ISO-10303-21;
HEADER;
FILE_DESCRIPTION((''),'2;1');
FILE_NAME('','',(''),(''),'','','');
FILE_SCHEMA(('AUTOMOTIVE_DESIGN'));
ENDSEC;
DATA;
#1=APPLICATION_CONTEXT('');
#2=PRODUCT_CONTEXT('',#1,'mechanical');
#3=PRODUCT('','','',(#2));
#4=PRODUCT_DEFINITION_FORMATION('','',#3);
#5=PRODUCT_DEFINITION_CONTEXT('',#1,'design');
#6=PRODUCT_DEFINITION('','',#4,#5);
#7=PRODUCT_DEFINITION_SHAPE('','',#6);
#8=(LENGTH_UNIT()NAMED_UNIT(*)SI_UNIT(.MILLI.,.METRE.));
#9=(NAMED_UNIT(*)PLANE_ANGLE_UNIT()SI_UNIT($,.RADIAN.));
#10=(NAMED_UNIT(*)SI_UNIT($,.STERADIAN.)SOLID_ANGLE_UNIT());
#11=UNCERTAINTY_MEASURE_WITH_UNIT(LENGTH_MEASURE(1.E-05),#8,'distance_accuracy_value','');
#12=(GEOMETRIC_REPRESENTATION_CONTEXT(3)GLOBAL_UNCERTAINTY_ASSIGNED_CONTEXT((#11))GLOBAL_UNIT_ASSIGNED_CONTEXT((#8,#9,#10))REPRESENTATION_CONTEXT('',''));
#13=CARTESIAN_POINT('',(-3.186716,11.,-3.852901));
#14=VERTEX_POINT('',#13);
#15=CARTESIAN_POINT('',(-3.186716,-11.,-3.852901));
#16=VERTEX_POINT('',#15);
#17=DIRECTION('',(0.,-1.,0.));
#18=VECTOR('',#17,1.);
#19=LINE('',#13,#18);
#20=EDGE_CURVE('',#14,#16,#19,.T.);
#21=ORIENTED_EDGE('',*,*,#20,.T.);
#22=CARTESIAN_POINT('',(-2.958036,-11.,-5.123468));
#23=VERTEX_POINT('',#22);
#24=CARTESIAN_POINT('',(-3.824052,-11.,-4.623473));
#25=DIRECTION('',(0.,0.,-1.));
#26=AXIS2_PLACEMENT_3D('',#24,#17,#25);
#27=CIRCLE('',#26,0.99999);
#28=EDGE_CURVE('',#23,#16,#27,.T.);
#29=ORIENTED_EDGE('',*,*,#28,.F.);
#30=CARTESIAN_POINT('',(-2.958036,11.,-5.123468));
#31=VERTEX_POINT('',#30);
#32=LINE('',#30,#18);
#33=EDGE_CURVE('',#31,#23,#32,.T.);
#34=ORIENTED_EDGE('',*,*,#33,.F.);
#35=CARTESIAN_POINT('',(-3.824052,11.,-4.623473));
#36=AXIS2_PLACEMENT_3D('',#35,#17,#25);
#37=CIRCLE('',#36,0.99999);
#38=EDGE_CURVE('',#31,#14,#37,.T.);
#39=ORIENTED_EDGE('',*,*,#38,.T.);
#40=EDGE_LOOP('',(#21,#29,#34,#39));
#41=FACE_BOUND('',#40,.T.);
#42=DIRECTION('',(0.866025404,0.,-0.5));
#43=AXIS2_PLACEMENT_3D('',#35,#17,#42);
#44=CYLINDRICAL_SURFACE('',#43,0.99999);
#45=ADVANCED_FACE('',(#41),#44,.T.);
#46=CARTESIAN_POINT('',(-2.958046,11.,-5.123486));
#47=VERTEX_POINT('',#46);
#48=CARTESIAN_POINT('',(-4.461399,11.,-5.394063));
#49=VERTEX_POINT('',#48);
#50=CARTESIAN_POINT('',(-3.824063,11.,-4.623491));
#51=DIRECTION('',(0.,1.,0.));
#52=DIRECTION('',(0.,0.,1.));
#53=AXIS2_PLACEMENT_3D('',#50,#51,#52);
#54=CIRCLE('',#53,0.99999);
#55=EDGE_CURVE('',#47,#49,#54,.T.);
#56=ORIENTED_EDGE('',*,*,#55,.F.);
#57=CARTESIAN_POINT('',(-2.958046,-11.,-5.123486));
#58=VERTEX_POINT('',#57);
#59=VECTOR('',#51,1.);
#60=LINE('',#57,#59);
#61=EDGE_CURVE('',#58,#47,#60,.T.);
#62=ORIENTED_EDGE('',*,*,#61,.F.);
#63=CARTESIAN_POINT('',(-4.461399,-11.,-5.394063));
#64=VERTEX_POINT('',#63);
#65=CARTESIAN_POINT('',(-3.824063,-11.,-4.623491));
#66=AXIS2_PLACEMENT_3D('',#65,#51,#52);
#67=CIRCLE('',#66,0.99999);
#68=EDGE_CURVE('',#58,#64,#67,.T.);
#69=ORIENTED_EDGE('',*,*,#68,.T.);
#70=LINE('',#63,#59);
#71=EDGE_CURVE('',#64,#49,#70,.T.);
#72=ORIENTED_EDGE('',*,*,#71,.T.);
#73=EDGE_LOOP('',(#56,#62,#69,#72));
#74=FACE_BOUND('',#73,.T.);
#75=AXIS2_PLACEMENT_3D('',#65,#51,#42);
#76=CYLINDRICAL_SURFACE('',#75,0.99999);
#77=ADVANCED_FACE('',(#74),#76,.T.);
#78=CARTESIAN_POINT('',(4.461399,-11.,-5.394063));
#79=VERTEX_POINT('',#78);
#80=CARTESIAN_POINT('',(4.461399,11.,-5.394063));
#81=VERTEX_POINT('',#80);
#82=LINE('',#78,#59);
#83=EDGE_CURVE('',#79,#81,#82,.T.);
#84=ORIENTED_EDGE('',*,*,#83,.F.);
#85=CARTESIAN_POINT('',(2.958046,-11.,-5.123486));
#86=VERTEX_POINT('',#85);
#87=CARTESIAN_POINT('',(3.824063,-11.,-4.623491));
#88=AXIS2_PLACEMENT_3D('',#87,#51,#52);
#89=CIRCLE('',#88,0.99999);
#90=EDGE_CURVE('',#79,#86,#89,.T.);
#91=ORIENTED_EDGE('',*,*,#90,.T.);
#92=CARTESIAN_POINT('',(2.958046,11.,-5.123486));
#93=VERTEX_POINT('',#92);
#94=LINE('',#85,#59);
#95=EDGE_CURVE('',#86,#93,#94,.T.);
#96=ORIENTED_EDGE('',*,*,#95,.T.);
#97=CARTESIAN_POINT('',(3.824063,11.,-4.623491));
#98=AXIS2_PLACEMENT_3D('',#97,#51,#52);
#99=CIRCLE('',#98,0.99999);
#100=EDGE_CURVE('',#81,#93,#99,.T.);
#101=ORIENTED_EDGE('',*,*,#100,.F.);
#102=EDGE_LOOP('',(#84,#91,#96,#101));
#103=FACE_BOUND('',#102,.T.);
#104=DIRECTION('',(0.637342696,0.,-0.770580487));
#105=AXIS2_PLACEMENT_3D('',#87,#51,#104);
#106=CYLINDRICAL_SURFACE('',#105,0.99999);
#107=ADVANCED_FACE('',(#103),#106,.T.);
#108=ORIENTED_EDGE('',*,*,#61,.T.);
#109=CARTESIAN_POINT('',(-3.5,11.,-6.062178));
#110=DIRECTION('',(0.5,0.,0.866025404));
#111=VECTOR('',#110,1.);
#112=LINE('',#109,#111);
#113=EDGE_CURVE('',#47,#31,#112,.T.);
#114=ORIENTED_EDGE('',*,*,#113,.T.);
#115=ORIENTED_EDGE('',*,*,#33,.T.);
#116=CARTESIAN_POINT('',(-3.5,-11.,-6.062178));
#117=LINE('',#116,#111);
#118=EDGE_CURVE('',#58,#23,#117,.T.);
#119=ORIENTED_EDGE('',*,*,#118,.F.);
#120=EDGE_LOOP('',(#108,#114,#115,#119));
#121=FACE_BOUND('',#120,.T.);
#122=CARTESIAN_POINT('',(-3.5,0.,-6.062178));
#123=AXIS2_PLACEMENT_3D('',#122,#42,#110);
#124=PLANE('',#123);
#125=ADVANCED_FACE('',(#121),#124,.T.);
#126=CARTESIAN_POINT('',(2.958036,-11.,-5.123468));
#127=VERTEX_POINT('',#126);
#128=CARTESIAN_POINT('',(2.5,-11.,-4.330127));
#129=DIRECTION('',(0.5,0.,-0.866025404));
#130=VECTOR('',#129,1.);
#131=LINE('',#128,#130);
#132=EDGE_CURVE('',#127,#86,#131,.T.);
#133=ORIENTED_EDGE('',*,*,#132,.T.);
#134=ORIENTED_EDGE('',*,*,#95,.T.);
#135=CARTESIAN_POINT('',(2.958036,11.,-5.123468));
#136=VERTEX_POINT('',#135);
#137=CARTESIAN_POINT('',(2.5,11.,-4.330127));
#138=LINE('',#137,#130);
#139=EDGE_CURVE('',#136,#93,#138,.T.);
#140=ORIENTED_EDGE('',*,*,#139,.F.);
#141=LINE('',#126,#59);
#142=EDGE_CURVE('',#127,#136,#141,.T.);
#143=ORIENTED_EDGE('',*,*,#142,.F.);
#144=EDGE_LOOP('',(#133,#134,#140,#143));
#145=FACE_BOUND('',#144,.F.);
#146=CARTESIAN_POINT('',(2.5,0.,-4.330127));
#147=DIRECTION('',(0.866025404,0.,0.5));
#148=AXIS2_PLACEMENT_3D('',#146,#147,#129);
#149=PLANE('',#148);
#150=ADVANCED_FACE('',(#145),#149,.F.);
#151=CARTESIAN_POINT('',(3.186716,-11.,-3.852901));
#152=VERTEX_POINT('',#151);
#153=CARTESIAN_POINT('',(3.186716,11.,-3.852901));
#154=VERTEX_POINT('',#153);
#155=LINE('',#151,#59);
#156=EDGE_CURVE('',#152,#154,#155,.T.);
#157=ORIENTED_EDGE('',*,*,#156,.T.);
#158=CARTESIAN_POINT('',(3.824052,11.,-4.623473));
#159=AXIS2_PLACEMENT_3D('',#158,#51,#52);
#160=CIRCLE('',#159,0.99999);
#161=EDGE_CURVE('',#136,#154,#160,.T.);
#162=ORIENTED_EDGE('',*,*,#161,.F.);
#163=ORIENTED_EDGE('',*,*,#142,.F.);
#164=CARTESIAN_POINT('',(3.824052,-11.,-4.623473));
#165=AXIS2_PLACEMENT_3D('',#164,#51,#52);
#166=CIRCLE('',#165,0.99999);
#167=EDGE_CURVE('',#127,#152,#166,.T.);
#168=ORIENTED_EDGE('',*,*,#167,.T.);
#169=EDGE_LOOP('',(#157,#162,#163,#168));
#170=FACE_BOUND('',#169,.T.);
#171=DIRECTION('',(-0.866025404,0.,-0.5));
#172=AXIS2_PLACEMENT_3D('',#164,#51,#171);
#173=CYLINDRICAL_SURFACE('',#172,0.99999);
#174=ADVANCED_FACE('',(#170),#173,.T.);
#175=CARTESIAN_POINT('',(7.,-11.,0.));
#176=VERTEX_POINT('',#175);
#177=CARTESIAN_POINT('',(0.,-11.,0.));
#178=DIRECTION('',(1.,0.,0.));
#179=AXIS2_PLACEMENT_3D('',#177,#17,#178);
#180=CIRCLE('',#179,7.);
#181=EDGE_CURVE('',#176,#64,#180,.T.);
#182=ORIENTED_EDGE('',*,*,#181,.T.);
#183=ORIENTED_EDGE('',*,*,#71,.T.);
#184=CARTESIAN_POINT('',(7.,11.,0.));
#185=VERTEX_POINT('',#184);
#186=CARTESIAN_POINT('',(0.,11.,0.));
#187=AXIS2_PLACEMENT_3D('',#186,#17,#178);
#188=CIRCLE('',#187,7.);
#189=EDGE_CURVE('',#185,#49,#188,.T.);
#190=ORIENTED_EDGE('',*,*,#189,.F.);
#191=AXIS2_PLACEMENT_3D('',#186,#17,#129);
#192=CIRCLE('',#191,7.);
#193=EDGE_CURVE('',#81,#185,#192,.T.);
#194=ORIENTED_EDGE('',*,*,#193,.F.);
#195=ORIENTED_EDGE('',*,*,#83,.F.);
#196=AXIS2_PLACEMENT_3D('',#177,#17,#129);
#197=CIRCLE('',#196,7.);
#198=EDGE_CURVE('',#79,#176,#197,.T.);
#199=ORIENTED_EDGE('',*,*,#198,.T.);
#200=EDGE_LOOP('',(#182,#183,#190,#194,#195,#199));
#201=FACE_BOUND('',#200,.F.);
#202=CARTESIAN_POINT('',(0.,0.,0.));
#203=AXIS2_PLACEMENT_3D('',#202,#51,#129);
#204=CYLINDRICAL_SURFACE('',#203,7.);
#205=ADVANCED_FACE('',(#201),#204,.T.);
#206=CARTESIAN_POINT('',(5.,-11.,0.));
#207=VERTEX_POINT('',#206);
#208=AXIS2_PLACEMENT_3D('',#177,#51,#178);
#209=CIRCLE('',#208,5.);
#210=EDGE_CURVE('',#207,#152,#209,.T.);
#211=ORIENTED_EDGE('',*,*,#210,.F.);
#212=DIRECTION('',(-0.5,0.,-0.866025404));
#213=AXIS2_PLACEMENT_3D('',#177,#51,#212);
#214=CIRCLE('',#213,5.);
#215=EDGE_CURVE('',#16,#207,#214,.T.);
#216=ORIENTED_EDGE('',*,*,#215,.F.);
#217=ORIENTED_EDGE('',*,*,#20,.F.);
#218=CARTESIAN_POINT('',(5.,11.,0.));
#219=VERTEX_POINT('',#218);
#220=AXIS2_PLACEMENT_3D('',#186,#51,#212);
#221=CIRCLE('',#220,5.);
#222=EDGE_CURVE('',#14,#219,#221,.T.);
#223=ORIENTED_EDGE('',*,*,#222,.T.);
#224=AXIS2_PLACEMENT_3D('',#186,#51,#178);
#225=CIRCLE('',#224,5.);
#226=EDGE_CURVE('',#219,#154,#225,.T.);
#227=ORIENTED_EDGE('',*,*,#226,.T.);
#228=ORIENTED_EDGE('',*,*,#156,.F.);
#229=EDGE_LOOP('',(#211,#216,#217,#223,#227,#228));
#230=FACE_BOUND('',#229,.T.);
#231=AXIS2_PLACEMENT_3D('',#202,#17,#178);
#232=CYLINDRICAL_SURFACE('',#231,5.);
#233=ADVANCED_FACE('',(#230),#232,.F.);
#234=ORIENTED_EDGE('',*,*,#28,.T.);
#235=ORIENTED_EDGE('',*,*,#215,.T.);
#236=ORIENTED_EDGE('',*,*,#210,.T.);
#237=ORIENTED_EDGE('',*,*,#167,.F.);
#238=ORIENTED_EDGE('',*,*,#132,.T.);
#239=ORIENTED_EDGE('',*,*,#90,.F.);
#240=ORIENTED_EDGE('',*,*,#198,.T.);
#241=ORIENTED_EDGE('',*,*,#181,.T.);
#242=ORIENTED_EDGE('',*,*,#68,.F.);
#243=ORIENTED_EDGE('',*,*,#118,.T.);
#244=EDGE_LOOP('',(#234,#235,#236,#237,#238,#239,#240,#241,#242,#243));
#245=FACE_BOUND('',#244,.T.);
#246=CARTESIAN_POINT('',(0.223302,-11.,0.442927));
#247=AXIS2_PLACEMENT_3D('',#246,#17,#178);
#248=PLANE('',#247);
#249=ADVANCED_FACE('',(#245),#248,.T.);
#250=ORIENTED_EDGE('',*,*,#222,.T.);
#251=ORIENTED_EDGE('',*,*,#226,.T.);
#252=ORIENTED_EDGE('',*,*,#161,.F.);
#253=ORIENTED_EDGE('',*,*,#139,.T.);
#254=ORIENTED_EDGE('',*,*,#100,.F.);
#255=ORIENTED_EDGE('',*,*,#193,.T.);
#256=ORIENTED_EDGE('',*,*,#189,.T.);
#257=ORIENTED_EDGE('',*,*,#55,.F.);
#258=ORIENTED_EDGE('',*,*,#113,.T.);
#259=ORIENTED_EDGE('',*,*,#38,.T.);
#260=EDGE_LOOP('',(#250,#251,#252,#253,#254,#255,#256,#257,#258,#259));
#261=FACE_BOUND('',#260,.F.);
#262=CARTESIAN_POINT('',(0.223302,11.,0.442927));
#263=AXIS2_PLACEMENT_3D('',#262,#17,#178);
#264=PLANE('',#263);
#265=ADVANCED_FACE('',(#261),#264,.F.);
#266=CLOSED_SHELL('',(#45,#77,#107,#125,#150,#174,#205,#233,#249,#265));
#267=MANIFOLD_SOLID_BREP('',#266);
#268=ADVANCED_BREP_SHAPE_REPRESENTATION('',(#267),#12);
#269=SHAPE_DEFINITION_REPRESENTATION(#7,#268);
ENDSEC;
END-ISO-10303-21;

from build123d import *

# Parameters (mm, degrees)
F1_DEPTH = 11
F2_R     = 0.99999


# Not quite as in the source:
# - a fillet or chamfer is up to 0.001 mm smaller than in the source, because OpenCascade refuses the exact size


with BuildPart() as f1:
    # F0 (on Front) → F1 (new body, symmetric)
    with BuildSketch(Plane.XZ):
        with BuildLine():
            Line((-3.5, -6.0621778265), (-2.5, -4.3301270189))
            ThreePointArc((-2.5, -4.3301270189), (-2.5, 4.3301270189), (5, 0))
            ThreePointArc((5, 0), (4.3301270189, -2.5), (2.5, -4.3301270189))
            Line((2.5, -4.3301270189), (3.5, -6.0621778265))
            ThreePointArc((3.5, -6.0621778265), (6.0621778265, -3.5), (7, 0))
            ThreePointArc((7, 0), (-3.5, 6.0621778265), (-3.5, -6.0621778265))
        make_face()
    extrude(amount=F1_DEPTH, both=True)

    # F2 (radius 1 in the source; OpenCascade refuses exactly that, so slightly less here)
    f2_edges = [f1.edges().sort_by_distance(p)[0] for p in [
        (3.5, 5.5, -6.062178),
        (3.5, -5.5, -6.062178),
        (2.5, -5.5, -4.330127),
        (-2.5, -5.5, -4.330127),
        (-3.5, 5.5, -6.062178),
        (-3.5, -5.5, -6.062178),
    ]]
    fillet(f2_edges, radius=F2_R)


solid = f1.part
